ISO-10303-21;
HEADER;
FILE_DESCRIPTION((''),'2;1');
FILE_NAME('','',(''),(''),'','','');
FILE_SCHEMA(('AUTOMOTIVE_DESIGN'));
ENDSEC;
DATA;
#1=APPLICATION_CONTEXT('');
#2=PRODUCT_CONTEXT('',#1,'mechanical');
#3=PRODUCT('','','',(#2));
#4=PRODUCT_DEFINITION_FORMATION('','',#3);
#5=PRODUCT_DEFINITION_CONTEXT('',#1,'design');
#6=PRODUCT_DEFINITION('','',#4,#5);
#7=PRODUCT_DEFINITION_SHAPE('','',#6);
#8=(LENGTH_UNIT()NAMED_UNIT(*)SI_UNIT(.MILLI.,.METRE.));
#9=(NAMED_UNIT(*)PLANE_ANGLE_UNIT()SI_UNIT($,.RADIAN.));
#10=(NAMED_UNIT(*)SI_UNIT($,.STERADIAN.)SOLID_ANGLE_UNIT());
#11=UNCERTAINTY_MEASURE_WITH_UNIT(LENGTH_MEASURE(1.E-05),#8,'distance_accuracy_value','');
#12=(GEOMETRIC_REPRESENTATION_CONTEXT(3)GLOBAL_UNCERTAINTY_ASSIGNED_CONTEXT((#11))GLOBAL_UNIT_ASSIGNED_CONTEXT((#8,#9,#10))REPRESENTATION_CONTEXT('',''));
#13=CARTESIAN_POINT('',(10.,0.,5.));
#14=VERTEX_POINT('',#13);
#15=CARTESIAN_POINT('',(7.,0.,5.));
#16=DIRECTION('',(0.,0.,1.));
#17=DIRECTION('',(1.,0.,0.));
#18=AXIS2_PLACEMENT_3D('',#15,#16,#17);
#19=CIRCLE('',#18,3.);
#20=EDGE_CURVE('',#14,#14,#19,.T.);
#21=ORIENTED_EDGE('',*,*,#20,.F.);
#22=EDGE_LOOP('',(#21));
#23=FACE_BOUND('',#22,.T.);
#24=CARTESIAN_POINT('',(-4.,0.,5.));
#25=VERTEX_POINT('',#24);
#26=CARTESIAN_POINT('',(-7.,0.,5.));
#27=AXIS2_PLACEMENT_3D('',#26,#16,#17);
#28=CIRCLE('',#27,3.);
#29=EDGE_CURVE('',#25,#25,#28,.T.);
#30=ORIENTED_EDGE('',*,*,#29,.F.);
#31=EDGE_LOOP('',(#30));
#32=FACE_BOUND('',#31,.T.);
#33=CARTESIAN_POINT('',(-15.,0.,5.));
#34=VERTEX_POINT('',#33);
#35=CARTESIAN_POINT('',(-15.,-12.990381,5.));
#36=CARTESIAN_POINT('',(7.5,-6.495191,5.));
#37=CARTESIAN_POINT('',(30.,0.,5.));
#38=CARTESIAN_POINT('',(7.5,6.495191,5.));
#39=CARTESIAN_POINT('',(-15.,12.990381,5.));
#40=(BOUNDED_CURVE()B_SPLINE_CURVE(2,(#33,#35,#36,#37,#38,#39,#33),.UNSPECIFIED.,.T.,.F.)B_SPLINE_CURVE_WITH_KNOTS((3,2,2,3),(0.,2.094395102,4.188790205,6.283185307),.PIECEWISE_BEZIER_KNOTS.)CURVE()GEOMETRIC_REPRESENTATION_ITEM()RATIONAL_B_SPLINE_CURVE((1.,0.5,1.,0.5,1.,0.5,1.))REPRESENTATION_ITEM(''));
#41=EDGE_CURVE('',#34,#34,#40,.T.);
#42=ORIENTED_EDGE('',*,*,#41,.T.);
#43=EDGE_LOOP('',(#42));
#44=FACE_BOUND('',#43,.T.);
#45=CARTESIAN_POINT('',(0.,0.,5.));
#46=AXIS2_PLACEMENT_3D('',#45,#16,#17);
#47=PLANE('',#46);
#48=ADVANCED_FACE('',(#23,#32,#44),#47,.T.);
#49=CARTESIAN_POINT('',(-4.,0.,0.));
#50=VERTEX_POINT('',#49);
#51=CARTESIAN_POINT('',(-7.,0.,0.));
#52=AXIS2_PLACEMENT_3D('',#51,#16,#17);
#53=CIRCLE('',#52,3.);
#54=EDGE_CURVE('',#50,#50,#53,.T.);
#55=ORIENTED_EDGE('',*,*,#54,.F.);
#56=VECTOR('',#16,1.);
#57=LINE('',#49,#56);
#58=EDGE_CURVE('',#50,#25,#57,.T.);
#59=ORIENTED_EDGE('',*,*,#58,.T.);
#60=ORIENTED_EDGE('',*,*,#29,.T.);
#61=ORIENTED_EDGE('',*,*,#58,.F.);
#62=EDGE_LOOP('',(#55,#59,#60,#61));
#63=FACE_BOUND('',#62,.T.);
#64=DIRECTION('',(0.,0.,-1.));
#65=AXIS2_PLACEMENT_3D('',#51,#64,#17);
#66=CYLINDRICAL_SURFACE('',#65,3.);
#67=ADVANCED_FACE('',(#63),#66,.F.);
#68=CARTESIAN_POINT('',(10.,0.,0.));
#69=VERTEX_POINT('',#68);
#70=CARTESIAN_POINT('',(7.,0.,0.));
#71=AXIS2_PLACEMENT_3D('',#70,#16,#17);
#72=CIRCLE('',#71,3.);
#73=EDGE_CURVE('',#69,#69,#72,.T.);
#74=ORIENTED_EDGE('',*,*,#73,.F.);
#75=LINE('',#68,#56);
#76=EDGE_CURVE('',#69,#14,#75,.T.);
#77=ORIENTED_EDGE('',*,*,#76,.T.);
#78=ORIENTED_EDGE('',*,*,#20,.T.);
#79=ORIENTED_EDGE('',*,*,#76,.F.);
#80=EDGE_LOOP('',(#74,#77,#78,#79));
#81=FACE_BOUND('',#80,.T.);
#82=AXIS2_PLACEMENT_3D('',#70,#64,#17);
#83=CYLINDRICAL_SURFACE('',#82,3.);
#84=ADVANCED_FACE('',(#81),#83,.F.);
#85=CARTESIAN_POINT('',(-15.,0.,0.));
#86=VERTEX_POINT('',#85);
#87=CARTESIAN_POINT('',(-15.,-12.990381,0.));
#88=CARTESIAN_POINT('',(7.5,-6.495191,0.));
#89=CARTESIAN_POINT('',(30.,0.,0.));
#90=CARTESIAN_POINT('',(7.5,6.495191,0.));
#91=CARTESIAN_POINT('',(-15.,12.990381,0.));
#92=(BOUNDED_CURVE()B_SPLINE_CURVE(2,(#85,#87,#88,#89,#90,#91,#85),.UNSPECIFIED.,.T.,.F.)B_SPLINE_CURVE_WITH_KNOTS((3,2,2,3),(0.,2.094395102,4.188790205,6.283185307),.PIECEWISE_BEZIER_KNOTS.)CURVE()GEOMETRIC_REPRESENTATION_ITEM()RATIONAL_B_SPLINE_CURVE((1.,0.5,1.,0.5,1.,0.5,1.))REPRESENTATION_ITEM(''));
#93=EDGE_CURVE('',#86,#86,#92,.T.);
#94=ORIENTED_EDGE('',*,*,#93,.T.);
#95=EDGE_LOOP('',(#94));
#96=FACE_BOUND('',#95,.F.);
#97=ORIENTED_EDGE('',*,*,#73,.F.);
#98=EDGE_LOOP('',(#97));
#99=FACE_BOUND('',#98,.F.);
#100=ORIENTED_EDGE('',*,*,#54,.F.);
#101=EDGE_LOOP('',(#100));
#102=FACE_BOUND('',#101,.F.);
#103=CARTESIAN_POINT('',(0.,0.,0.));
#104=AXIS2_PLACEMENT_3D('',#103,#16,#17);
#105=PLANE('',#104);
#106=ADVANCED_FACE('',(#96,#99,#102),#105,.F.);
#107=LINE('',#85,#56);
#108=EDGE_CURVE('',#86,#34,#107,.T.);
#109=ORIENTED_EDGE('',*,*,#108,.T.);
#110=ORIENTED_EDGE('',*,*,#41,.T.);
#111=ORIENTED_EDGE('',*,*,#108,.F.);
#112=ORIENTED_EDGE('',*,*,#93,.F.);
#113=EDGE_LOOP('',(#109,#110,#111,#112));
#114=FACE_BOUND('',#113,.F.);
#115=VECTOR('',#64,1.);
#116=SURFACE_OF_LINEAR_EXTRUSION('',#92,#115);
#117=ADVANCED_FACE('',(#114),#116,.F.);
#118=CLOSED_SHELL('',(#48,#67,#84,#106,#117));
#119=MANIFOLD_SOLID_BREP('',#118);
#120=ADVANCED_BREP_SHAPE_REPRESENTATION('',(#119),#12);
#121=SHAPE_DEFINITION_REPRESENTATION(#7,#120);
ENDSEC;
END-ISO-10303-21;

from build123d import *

# Parameters (mm, degrees)
F0_R     = 3
F1_DEPTH = 5


# Not quite as in the source:
# - a feature names something its author has since deleted; it is built from what else it names


with BuildPart() as f1:
    # F0 (on Top) → F1 (new body)
    with BuildSketch(Plane.XY):
        with BuildLine():
            add(Edge.make_bspline(
                [(-15, 0), (-15, -12.9903810568), (7.5, -6.4951905284), (30, 0), (7.5, 6.4951905284), (-15, 12.9903810568), (-15, 0)],
                knots=[0, 0, 0, 2.0943951024, 2.0943951024, 4.1887902048, 4.1887902048, 6.2831853072, 6.2831853072, 6.2831853072], degree=2, weights=[1, 0.5, 1, 0.5, 1, 0.5, 1]))
        make_face()
        with Locations((-7, 0)):
            Circle(F0_R, mode=Mode.SUBTRACT)
        with Locations((7, 0)):
            Circle(F0_R, mode=Mode.SUBTRACT)
    extrude(amount=F1_DEPTH)


solid = f1.part
